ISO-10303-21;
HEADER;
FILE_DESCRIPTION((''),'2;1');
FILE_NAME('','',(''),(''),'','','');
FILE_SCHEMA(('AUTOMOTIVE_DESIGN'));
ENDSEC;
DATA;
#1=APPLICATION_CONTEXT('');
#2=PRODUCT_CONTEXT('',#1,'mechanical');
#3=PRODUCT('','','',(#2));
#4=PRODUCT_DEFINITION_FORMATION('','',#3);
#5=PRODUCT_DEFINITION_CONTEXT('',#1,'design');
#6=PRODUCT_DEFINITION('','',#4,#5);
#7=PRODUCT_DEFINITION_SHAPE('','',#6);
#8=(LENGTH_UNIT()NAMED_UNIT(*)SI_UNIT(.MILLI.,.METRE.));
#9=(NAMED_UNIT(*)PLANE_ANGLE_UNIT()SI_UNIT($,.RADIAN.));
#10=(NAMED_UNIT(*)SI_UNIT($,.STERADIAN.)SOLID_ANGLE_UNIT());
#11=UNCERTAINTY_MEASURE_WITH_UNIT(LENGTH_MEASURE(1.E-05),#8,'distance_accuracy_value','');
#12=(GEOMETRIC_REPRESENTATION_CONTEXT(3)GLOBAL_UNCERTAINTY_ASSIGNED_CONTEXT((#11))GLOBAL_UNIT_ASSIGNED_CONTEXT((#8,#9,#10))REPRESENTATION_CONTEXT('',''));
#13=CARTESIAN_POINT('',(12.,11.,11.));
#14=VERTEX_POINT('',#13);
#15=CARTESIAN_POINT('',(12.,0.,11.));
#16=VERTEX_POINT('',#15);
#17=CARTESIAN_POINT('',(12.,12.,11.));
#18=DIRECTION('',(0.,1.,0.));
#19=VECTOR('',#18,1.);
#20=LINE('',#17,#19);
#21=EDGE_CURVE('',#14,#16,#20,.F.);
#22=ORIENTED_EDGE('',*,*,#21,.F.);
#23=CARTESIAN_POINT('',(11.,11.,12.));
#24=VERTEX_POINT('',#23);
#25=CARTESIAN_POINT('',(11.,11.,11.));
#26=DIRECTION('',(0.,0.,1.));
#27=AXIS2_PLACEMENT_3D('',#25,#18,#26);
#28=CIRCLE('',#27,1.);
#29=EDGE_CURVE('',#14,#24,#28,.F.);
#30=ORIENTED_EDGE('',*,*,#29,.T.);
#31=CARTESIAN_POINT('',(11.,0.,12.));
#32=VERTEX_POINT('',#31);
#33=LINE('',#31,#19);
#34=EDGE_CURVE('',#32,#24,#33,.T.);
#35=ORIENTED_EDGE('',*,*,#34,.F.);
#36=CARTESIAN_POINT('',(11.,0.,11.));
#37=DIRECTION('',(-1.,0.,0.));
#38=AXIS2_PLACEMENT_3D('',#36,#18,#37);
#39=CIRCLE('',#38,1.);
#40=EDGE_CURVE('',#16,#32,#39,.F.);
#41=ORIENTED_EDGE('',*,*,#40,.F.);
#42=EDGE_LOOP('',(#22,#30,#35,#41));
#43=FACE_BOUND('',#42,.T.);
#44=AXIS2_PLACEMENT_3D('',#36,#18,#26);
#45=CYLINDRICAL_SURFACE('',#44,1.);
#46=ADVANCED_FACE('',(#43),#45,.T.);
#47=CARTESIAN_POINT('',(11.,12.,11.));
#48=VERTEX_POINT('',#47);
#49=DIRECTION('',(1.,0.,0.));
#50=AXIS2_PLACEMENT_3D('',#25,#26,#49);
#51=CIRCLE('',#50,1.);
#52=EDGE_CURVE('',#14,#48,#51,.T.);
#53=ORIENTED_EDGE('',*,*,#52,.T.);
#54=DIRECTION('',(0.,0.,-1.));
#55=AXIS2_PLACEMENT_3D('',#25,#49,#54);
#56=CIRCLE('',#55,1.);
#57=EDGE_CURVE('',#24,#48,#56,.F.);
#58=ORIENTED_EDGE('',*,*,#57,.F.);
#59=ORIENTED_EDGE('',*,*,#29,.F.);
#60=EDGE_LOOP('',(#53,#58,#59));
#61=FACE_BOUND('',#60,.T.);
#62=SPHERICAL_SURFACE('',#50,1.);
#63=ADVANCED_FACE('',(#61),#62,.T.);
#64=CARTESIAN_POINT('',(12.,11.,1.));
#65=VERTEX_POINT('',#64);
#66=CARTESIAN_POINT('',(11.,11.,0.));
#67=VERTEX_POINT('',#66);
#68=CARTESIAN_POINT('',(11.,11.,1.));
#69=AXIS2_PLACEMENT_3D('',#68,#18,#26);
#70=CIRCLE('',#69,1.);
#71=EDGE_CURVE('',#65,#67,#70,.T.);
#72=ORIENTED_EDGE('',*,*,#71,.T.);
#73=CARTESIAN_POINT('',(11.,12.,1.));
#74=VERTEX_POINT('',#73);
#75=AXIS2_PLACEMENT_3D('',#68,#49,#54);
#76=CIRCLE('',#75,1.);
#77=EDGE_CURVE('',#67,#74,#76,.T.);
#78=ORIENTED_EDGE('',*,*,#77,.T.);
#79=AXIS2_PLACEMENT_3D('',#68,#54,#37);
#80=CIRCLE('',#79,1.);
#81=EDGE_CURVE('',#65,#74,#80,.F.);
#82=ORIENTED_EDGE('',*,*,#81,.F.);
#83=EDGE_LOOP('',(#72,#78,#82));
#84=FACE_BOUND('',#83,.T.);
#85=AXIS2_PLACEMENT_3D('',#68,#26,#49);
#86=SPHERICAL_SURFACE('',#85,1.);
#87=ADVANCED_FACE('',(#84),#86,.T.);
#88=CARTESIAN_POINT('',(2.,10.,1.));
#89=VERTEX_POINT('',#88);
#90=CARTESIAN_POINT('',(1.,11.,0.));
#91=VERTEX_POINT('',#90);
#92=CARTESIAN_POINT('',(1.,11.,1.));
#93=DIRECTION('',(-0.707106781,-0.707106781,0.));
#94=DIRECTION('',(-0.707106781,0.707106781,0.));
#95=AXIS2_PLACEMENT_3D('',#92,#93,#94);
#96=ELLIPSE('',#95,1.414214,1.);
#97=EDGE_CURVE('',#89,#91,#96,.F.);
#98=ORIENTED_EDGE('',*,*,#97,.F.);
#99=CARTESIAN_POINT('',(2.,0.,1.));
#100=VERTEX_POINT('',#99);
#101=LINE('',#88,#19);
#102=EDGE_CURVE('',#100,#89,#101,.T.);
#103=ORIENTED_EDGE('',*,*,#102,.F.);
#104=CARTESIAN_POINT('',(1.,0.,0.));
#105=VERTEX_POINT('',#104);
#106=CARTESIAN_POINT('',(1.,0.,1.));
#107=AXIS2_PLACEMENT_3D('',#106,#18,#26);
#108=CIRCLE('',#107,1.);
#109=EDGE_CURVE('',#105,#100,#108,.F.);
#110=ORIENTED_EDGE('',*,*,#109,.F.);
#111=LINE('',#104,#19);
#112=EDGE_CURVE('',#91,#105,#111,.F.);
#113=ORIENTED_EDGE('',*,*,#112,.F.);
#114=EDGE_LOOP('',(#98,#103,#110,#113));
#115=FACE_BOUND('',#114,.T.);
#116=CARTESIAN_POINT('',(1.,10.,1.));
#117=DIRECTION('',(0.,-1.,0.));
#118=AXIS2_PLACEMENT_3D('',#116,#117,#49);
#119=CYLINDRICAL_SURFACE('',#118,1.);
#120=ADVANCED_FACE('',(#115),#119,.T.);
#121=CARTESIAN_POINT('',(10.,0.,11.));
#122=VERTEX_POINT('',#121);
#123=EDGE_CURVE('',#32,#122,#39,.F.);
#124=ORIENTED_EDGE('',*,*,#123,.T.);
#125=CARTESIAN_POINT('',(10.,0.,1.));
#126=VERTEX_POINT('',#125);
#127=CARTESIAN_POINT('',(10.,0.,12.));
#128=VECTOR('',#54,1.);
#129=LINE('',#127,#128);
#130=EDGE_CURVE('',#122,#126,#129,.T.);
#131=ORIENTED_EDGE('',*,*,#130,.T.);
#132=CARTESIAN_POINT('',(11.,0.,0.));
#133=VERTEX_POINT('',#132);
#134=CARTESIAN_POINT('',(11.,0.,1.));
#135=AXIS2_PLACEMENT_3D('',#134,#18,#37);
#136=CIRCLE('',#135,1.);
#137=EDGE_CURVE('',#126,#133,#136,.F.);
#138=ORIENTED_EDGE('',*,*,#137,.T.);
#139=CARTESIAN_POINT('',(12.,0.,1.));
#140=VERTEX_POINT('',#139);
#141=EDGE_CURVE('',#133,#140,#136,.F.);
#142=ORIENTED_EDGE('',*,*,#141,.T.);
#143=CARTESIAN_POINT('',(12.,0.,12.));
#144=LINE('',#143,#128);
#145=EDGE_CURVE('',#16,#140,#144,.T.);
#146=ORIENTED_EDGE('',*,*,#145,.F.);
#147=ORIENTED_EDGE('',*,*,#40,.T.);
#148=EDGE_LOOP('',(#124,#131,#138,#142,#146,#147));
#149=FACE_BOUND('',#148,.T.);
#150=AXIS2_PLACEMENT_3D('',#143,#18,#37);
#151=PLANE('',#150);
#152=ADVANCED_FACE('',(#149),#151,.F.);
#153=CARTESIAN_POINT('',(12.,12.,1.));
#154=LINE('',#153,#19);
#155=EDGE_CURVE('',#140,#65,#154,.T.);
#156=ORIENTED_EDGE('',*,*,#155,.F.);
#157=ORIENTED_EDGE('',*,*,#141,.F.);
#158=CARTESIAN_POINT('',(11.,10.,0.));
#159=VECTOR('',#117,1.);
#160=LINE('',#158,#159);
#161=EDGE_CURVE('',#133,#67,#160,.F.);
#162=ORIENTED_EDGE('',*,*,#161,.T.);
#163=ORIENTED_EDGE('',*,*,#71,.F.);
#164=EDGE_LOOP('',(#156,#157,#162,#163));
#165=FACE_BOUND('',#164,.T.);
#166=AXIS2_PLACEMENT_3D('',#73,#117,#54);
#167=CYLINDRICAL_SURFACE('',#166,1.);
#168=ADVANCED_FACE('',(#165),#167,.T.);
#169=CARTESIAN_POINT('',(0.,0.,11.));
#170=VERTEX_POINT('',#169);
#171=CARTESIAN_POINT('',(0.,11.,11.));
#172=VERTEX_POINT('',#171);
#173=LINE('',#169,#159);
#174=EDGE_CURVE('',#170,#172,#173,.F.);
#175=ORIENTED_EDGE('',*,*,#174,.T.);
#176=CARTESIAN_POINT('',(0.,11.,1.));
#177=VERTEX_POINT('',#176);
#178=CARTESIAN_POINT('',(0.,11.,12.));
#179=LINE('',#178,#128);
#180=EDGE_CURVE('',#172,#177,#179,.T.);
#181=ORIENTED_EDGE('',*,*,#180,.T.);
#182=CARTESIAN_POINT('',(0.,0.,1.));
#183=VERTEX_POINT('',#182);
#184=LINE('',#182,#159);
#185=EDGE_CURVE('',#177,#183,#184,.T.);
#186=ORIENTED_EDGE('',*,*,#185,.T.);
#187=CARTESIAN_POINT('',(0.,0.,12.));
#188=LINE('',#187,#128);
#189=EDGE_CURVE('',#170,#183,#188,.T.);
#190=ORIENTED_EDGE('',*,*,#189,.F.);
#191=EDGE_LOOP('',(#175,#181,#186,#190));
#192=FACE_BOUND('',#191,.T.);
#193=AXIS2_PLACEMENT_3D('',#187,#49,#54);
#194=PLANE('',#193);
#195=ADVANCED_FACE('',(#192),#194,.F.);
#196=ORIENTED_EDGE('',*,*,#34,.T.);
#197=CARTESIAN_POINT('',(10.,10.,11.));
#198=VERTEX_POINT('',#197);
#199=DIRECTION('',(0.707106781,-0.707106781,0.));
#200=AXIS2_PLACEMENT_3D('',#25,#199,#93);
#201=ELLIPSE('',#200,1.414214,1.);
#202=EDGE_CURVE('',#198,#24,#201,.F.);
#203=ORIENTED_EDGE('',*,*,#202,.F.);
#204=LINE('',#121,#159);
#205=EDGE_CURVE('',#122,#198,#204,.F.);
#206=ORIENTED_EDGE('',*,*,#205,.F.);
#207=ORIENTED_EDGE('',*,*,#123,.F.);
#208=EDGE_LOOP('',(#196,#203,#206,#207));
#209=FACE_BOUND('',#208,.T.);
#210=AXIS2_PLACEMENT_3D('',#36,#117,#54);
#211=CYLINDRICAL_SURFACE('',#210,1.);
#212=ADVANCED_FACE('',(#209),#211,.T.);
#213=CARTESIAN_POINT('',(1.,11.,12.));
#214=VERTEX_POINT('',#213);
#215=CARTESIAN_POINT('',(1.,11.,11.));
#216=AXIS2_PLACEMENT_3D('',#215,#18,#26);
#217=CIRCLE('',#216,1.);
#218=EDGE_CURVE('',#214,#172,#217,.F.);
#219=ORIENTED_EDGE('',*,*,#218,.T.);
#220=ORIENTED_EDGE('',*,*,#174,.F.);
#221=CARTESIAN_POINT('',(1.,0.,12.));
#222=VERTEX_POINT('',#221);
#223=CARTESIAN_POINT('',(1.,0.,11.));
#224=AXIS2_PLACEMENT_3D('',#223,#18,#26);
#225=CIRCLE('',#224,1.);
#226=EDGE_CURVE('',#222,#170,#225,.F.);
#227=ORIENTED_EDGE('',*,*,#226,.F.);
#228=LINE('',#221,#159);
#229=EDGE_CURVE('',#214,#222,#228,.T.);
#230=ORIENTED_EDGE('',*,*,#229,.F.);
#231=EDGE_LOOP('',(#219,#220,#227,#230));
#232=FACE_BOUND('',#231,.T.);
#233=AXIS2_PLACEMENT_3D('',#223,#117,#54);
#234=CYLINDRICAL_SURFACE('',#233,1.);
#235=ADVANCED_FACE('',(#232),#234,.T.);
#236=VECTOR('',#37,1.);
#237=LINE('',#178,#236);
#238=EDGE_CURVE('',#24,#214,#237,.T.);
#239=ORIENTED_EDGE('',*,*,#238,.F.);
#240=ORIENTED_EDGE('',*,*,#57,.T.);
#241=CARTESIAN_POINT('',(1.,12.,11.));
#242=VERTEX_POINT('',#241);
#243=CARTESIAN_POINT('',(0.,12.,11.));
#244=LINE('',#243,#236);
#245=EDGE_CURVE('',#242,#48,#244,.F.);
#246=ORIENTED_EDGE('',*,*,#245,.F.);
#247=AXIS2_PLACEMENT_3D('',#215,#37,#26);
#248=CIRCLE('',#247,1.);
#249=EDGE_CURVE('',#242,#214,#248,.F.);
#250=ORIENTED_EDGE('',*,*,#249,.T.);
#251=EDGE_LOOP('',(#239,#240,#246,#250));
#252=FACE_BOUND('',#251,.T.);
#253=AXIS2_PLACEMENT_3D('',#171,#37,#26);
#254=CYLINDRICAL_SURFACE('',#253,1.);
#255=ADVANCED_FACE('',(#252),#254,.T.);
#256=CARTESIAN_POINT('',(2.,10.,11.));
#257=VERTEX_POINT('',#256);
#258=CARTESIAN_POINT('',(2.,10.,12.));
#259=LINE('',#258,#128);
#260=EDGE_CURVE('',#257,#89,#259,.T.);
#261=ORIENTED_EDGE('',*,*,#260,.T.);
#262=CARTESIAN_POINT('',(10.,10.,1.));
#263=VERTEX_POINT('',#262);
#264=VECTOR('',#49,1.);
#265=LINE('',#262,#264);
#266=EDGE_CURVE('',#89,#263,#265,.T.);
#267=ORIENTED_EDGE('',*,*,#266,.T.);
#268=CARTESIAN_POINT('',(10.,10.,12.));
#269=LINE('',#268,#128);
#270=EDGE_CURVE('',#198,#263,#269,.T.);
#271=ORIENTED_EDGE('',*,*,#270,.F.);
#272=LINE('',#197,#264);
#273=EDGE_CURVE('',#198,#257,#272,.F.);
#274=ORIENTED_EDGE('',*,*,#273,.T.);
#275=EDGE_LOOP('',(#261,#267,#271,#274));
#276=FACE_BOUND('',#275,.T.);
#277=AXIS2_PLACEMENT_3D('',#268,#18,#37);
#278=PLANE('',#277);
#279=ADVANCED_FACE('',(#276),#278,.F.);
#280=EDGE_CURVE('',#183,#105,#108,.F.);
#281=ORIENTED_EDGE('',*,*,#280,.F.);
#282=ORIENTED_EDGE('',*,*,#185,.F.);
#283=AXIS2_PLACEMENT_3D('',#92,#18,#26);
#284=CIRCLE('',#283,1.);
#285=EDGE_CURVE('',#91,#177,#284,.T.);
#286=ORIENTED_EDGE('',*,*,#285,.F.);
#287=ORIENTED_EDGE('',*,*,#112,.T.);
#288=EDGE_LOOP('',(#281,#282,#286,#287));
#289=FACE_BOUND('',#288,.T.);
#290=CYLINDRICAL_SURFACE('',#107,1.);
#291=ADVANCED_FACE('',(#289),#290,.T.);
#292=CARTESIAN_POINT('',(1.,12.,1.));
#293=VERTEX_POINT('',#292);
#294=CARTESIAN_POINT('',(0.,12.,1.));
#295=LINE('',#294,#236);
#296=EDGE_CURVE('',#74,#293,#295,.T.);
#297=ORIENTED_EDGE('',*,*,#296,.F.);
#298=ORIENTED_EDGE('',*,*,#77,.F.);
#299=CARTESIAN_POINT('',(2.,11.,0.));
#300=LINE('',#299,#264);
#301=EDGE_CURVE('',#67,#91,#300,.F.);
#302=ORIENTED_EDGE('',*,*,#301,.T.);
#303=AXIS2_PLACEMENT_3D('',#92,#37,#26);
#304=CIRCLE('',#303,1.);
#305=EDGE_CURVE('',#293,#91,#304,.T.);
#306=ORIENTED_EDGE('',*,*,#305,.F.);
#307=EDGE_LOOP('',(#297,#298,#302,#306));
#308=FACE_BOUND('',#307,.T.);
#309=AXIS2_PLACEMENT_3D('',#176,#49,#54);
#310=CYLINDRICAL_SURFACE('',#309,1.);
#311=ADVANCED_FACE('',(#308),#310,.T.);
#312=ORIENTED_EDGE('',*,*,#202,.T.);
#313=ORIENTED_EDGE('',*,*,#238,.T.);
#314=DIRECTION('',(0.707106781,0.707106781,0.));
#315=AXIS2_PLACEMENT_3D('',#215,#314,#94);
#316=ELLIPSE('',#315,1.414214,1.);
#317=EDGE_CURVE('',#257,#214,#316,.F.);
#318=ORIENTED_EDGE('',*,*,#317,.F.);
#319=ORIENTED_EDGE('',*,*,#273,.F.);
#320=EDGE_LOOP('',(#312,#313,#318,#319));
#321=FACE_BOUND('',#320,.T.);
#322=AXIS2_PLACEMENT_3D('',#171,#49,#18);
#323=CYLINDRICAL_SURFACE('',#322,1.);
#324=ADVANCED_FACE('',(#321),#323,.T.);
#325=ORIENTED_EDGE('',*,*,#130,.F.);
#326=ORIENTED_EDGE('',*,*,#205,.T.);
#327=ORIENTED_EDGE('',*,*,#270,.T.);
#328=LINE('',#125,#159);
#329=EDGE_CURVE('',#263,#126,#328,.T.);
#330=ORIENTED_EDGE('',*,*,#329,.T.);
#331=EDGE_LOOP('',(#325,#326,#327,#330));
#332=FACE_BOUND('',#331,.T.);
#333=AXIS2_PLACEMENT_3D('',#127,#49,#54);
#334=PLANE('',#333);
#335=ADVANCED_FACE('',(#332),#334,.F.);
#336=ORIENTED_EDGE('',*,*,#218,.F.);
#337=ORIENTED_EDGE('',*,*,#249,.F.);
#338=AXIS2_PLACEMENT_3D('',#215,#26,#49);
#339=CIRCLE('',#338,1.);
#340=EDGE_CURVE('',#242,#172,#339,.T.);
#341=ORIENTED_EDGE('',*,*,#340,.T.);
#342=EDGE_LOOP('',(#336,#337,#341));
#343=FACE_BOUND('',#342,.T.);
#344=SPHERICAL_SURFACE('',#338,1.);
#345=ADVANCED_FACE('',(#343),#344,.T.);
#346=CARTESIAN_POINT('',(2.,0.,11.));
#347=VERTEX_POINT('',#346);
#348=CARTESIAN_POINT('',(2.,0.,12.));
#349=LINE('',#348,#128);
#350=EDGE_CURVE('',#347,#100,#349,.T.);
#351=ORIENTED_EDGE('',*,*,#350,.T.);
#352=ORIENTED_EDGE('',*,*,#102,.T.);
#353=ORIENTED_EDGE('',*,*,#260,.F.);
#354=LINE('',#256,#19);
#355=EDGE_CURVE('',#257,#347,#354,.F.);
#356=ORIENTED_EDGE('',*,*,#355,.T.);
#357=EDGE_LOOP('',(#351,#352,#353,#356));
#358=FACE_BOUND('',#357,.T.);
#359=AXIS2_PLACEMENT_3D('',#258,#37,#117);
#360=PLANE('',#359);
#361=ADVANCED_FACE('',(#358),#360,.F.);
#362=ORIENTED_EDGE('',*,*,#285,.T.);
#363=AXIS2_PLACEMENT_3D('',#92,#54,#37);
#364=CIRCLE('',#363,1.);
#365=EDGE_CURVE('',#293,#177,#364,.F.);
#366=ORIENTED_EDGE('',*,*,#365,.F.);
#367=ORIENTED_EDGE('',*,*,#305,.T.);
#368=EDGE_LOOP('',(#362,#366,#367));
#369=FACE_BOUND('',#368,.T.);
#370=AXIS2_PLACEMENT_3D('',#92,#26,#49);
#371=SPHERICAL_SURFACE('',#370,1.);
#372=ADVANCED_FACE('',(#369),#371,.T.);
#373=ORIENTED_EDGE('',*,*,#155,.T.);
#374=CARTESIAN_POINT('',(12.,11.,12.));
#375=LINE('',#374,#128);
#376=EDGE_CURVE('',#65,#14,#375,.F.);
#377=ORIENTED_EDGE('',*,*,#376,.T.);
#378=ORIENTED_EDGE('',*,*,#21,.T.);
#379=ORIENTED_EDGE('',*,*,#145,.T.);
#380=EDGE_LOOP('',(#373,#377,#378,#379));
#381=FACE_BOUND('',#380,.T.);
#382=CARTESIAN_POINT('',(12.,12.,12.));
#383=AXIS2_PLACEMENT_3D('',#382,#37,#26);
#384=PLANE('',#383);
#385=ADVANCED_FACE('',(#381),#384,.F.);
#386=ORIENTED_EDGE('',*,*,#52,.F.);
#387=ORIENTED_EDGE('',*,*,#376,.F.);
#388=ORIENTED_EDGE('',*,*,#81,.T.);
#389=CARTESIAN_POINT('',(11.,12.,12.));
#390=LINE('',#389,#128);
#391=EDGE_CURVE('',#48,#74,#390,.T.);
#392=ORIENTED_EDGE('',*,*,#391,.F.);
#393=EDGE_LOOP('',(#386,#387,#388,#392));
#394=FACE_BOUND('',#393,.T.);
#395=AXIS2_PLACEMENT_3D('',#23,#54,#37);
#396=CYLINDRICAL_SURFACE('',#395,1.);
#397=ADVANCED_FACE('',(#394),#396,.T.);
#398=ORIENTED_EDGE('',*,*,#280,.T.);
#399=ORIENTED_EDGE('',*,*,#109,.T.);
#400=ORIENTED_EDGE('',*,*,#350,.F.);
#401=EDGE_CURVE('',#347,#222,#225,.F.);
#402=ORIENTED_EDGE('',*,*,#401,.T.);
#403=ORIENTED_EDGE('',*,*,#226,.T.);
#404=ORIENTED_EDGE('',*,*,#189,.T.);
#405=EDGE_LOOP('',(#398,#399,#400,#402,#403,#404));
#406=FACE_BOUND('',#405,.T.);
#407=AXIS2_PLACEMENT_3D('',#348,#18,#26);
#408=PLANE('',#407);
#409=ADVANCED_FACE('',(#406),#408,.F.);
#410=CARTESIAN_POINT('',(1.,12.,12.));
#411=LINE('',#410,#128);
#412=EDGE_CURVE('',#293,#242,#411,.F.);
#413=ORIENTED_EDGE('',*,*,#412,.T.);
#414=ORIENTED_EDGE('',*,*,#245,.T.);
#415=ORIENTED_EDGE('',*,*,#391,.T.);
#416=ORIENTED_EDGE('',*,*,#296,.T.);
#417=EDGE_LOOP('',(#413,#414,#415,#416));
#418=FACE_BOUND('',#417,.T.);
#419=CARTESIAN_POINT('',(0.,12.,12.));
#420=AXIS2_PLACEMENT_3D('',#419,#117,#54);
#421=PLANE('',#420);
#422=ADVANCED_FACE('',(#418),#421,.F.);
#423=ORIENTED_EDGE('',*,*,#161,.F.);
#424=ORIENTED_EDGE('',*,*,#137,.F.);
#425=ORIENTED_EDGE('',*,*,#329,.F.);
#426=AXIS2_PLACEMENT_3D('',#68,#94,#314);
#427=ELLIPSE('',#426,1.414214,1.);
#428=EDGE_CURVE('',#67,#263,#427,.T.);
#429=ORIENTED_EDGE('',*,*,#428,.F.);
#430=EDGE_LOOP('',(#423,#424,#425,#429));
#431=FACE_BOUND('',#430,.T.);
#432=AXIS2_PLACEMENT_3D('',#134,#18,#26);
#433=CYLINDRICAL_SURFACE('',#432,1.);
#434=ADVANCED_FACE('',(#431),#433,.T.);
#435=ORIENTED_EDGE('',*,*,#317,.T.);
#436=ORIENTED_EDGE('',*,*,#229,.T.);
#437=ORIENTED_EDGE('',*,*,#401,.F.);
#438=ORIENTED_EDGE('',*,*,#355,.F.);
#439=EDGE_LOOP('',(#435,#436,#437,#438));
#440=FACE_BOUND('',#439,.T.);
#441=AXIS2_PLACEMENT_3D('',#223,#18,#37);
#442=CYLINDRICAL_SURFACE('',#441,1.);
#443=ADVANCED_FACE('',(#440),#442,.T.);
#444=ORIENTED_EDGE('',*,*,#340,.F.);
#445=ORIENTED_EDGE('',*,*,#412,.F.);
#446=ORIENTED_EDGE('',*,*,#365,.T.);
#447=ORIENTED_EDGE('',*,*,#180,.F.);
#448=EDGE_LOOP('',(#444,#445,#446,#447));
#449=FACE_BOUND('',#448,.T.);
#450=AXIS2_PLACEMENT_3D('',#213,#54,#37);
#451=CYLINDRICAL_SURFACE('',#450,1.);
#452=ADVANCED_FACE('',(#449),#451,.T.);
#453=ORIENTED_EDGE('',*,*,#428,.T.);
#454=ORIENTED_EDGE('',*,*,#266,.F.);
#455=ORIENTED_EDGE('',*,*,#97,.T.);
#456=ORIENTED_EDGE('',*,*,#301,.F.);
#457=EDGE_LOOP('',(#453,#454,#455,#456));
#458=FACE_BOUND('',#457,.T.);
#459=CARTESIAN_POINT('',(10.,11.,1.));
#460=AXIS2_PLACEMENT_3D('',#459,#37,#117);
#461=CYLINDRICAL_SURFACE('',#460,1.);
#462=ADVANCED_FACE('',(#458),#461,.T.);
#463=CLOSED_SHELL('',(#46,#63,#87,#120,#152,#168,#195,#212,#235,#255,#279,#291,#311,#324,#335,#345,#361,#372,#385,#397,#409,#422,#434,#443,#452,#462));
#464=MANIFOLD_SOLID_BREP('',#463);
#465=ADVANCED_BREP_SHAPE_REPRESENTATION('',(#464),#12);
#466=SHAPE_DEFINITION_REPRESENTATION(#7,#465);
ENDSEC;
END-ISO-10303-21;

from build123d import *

# Parameters (mm, degrees)
BOSS_EXTRUDE1_DEPTH = 12
FILLET3_R           = 1


with BuildPart() as part:
    # Sketch1 → Boss-Extrude1 (new body)
    with BuildSketch(Plane.XY):
        Polygon((0, 0), (0, 12), (12, 12), (12, 0), (10, 0), (10, 10), (2, 10), (2, 0), align=None)
    extrude(amount=BOSS_EXTRUDE1_DEPTH)

    # Fillet3
    fillet3_edges = [part.edges().sort_by_distance(p)[0] for p in [
        (2, 5, 12),
        (0, 6, 12),
        (12, 6, 12),
        (10, 5, 12),
        (6, 10, 12),
        (6, 12, 12),
        (0, 12, 6),
        (12, 12, 6),
        (12, 6, 0),
        (6, 12, 0),
        (0, 6, 0),
        (10, 5, 0),
        (6, 10, 0),
        (2, 5, 0),
    ]]
    fillet(fillet3_edges, radius=FILLET3_R - 0.0001)  # a hair under: the kernel refuses the full size


solid = part.part
